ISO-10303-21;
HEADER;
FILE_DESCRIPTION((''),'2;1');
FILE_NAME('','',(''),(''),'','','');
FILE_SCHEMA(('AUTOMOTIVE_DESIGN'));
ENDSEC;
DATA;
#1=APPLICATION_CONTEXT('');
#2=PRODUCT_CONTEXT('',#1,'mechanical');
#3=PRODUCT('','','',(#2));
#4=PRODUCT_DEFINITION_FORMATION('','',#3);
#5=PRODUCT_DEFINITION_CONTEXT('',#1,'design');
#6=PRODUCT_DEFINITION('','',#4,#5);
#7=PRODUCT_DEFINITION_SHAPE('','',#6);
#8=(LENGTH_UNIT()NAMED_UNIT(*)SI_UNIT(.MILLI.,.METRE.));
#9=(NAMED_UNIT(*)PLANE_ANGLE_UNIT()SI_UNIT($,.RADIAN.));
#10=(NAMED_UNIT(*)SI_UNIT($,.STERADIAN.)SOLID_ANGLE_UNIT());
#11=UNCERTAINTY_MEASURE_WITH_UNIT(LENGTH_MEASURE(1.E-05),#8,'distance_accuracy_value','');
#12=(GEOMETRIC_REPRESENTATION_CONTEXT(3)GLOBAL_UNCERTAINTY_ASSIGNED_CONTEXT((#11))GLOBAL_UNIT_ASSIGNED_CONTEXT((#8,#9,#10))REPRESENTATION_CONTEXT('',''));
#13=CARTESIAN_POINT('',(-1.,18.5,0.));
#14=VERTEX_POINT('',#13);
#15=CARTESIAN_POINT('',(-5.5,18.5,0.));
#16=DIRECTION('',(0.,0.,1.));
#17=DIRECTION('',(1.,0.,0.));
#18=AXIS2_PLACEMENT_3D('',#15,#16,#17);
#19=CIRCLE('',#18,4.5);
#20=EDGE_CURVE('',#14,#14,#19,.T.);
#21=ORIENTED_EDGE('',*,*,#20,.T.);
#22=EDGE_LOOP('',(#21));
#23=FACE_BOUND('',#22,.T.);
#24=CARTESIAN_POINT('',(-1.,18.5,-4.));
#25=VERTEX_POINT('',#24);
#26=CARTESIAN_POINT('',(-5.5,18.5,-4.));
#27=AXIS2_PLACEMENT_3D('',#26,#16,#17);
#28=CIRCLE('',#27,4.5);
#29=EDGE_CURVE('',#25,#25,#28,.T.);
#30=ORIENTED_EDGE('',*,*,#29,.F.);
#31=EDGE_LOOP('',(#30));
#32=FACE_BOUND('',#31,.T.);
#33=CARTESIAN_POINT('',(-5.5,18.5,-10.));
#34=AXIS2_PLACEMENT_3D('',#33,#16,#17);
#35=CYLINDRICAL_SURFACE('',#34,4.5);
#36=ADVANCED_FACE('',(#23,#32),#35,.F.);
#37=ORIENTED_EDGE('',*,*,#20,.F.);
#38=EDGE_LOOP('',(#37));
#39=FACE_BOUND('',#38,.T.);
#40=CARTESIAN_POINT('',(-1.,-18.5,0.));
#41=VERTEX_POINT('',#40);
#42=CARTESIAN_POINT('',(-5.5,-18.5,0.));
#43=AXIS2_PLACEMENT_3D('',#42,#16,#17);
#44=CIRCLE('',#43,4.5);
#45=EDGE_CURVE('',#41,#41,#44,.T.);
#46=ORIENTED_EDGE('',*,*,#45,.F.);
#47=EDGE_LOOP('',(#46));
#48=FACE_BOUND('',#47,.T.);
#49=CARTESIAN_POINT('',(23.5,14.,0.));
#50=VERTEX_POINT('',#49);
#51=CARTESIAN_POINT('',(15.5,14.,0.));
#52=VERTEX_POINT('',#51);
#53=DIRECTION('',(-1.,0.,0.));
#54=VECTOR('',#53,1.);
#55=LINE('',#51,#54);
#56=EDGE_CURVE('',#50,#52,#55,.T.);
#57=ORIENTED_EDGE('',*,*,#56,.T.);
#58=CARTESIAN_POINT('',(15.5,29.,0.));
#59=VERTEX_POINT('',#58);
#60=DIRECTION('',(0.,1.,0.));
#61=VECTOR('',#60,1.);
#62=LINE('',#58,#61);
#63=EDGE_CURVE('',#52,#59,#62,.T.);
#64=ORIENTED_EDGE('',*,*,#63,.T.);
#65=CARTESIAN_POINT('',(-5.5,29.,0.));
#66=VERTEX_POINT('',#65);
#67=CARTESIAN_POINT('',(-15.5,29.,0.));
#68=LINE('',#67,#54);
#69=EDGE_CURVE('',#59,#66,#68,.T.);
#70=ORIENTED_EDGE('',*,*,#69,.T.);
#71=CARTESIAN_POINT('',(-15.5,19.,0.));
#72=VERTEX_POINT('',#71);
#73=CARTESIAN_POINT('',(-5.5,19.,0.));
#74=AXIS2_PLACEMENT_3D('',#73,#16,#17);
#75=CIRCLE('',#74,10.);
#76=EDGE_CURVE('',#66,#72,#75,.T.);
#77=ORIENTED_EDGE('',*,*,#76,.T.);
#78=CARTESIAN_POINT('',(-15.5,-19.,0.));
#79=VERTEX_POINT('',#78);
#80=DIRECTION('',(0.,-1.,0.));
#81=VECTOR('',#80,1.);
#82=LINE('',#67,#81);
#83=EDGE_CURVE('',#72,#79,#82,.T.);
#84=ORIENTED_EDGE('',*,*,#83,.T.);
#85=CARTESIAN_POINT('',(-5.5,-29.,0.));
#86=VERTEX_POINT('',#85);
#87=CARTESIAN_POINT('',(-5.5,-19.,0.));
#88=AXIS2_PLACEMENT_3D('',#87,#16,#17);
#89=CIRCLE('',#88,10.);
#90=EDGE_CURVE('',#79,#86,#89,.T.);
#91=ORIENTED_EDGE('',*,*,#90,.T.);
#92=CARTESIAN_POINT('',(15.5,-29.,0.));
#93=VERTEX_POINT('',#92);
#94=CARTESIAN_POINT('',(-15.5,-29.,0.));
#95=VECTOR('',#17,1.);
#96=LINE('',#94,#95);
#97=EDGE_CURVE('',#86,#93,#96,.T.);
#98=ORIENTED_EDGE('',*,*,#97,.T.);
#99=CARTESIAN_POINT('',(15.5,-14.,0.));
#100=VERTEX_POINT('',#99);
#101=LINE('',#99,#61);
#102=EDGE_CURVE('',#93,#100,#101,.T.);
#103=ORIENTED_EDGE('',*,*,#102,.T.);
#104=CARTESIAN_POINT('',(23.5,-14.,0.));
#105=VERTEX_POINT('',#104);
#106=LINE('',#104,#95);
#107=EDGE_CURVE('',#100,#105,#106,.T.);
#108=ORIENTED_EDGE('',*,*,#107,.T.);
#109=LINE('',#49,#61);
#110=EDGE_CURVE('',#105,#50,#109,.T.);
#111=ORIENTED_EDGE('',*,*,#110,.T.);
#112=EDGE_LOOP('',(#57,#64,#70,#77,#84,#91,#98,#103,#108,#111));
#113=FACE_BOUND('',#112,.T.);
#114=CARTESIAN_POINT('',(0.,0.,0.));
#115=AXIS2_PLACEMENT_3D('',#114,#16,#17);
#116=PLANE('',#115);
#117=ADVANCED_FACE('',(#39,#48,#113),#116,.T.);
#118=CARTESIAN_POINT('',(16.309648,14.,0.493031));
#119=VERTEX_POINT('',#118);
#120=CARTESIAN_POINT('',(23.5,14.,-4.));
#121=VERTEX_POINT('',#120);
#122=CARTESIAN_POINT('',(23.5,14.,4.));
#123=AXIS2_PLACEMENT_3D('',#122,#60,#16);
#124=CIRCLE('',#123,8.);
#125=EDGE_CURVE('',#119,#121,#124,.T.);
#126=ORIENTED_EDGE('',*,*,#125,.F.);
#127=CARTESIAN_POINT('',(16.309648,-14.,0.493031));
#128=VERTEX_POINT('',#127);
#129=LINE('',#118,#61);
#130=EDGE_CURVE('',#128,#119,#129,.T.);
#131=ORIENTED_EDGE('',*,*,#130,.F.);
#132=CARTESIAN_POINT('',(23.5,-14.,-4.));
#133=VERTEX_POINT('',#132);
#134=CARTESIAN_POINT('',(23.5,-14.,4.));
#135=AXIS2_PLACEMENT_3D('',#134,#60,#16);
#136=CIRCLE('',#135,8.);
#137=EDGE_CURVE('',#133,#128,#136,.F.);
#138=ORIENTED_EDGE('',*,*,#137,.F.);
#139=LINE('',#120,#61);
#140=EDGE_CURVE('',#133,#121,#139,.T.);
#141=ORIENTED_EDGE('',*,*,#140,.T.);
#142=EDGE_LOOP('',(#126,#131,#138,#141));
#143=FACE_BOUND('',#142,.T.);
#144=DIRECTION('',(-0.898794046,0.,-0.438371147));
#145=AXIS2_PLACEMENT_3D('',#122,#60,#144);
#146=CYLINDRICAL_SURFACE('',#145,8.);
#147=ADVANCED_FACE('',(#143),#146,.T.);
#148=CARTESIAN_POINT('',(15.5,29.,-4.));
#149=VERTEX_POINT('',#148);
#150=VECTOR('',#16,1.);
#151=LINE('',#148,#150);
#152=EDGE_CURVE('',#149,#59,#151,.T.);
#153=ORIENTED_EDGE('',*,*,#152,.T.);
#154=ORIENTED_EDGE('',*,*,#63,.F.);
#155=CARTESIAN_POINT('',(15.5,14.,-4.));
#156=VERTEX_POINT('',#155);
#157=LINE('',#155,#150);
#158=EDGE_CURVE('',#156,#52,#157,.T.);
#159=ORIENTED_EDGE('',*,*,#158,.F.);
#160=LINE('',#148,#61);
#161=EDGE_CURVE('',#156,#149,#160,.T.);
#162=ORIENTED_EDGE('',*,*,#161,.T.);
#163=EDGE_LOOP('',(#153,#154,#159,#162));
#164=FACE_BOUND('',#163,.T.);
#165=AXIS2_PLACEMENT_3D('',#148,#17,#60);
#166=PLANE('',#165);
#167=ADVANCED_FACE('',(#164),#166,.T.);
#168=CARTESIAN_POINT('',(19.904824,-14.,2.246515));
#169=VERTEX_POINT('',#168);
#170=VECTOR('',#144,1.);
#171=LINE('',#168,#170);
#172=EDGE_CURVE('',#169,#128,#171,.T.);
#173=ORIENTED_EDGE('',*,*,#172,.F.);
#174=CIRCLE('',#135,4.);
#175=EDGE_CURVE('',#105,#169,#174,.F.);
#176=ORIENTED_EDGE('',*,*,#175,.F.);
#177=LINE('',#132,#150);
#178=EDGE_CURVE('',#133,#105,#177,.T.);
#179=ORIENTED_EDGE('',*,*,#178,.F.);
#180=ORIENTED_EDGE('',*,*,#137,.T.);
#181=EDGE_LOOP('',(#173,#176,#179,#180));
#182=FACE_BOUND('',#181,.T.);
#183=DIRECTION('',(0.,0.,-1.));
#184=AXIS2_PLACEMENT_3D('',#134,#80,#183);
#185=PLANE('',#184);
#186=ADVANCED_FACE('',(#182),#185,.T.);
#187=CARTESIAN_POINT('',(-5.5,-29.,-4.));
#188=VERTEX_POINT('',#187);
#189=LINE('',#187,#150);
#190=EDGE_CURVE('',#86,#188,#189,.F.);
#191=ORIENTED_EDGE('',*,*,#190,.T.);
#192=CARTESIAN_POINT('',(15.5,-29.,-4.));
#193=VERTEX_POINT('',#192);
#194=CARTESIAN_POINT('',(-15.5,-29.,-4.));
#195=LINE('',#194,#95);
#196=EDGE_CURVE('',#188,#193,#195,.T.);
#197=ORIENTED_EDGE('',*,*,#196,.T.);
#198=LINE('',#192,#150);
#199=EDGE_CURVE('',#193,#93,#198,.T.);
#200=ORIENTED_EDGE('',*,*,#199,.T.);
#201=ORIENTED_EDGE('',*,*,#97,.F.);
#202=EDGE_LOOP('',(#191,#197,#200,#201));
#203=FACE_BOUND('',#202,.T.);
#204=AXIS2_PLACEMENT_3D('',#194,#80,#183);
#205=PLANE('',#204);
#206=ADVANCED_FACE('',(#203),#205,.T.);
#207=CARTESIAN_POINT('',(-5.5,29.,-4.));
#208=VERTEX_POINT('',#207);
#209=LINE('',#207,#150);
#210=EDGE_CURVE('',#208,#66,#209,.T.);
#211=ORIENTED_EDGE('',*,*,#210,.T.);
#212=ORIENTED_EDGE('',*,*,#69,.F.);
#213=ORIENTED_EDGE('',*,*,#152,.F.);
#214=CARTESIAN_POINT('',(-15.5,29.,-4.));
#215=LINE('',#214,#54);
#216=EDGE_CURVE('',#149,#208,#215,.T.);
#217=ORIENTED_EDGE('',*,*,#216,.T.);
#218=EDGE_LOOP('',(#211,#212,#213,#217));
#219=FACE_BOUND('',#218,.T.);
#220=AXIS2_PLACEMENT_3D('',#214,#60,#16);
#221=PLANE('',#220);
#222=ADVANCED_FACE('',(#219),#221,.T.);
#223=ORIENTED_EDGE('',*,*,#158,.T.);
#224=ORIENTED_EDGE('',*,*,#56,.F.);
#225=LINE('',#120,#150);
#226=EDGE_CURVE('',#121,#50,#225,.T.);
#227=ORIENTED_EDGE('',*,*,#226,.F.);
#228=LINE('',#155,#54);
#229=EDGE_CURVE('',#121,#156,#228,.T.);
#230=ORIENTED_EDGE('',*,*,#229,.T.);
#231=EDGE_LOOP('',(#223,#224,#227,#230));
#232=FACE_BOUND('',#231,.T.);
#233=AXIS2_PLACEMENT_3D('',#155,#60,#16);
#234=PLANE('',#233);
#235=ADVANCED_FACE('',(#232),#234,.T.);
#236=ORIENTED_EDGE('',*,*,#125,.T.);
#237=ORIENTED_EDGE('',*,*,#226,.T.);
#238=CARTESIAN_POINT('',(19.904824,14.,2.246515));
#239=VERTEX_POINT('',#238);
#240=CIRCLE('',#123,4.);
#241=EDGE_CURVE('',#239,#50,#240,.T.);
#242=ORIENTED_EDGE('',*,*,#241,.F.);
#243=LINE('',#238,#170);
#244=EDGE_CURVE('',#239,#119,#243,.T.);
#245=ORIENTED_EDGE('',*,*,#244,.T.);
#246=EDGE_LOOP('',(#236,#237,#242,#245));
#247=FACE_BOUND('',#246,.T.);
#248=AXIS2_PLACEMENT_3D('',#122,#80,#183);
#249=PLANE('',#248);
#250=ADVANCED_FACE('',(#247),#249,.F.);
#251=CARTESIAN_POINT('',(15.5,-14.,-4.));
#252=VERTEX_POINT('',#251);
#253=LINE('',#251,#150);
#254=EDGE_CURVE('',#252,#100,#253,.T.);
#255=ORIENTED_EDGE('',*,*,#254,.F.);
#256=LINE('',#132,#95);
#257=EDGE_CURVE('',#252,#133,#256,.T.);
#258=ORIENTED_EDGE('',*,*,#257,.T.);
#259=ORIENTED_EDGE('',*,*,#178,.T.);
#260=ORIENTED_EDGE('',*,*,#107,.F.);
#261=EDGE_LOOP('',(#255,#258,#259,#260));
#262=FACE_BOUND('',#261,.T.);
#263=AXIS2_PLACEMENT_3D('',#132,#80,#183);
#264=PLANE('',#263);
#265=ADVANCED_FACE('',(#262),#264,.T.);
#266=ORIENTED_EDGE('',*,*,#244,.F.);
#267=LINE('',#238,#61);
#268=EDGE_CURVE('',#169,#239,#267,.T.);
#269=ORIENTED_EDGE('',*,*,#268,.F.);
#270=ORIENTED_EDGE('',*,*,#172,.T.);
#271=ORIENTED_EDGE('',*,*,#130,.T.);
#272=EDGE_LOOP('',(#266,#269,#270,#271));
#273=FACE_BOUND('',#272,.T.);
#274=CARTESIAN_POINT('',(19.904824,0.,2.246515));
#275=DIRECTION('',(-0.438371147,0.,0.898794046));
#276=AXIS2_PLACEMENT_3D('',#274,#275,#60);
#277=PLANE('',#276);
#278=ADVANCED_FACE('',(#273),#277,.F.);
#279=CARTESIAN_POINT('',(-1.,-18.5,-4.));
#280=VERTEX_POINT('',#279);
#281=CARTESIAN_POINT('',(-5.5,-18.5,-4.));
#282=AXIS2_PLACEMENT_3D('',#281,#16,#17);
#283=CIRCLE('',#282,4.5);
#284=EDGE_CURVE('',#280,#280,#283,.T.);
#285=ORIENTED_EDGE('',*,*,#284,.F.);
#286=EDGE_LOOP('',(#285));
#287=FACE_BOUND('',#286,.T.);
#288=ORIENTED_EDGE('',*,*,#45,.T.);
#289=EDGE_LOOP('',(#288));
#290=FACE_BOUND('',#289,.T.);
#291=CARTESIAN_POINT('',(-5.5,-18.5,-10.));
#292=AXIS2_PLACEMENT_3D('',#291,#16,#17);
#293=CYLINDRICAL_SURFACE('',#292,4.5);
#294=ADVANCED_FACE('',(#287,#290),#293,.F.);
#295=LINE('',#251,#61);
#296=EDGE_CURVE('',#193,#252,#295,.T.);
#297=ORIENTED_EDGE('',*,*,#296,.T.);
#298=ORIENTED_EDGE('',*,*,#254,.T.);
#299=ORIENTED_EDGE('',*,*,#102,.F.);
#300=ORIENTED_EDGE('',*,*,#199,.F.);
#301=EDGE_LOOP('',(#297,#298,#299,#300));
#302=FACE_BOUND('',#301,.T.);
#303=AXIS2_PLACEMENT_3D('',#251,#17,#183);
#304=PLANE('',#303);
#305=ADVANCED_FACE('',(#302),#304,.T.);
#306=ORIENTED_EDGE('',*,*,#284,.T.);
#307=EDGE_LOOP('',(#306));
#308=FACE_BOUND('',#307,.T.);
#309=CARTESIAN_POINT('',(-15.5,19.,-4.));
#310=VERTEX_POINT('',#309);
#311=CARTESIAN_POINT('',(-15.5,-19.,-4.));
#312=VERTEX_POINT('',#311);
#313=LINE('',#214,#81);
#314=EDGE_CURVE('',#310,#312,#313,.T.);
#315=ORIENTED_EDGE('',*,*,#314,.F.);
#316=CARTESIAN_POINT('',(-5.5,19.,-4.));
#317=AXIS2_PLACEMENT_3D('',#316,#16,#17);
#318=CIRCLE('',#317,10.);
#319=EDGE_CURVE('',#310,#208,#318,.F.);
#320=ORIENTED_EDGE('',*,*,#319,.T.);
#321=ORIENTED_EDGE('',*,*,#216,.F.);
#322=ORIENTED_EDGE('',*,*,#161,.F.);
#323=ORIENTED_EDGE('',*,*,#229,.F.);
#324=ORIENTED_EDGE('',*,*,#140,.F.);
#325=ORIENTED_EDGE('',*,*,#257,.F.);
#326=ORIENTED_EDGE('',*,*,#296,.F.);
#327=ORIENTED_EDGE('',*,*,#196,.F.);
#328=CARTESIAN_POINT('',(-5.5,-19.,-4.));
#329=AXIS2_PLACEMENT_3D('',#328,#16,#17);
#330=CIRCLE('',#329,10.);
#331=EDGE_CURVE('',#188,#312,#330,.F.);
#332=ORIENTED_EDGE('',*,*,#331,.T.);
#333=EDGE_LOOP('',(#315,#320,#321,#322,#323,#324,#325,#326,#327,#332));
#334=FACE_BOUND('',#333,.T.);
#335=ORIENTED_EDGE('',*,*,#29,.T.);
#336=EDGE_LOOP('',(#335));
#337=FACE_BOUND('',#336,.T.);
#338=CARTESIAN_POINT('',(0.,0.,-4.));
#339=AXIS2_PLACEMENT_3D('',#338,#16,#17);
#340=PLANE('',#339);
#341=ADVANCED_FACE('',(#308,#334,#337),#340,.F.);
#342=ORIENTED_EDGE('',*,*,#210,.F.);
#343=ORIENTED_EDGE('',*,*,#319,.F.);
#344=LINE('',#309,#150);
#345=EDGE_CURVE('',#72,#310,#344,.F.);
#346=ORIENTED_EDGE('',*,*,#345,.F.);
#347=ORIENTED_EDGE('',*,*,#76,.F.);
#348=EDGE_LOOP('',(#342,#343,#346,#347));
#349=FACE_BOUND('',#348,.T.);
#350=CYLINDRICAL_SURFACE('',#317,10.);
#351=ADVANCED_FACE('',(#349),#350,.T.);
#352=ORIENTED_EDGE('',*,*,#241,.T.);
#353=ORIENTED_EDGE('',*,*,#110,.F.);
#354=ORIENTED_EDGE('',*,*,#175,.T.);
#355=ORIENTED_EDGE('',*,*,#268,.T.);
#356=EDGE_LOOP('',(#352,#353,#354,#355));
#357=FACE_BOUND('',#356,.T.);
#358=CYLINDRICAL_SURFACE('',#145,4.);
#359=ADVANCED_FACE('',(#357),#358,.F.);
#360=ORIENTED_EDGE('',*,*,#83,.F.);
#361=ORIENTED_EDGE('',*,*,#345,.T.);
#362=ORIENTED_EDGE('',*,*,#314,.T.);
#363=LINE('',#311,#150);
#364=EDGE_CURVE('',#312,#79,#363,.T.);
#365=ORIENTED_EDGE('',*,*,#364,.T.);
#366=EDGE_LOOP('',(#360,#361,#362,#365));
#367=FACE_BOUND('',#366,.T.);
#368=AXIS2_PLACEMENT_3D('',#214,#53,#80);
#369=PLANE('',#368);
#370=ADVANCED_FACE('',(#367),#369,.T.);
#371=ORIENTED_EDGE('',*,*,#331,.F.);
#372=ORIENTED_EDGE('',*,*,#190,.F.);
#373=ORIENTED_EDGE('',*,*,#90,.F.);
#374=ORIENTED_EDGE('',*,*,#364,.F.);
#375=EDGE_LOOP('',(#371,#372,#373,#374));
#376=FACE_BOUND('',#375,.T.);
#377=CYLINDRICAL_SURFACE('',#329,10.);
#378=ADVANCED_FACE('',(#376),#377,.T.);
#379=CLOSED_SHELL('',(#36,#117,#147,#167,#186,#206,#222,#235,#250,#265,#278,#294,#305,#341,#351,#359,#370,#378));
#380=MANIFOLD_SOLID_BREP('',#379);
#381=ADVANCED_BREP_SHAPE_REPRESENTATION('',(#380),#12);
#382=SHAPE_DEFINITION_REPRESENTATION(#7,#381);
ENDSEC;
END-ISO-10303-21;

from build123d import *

# Parameters (mm, degrees)
BASE_FLANGE1_DEPTH = 4
HEM2_START         = -14
HEM2_DEPTH         = 28
SKETCH12_R         = 4.5
CUT_EXTRUDE1_DEPTH = 10
FILLET1_R          = 10


# Read off the part's stored shape, not the designer's step: Hem2
# Sheet-metal steps are written as plain solids
with BuildPart() as part:
    # Sketch1 → Base-Flange1 (new body)
    with BuildSketch(Plane.XY):
        Polygon((15.5, 14), (23.5, 14), (23.5, -14), (15.5, -14), (15.5, -29), (-15.5, -29), (-15.5, 29), (15.5, 29), align=None)
    extrude(amount=-BASE_FLANGE1_DEPTH)

    # Hem2 outline → Hem2 (add)
    with BuildSketch(Plane(origin=(0, 0, 0), x_dir=(1, 0, 0), z_dir=(0, 1, 0)).offset(HEM2_START)):
        with BuildLine():
            Line((19.904823815, -2.246515413), (16.30964763, -0.493030826))
            ThreePointArc((16.30964763, -0.493030826), (27.739354115, -10.784384769), (23.5, 4))
            Line((23.5, 4), (23.5, 0))
            ThreePointArc((23.5, 0), (25.619677058, -7.392192385), (19.904823815, -2.246515413))
        make_face()
    extrude(amount=HEM2_DEPTH)

    # Sketch12 → Cut-Extrude1 (cut)
    with BuildSketch(Plane.XY):
        with Locations((-5.5, 18.5)):
            Circle(SKETCH12_R)
        with Locations((-5.5, -18.5)):
            Circle(SKETCH12_R)
    extrude(amount=-CUT_EXTRUDE1_DEPTH, mode=Mode.SUBTRACT)

    # Fillet1
    fillet1_edges = [part.edges().sort_by_distance(p)[0] for p in [
        (-15.5, -29, -2),
        (-15.5, 29, -2),
    ]]
    fillet(fillet1_edges, radius=FILLET1_R)


solid = part.part
